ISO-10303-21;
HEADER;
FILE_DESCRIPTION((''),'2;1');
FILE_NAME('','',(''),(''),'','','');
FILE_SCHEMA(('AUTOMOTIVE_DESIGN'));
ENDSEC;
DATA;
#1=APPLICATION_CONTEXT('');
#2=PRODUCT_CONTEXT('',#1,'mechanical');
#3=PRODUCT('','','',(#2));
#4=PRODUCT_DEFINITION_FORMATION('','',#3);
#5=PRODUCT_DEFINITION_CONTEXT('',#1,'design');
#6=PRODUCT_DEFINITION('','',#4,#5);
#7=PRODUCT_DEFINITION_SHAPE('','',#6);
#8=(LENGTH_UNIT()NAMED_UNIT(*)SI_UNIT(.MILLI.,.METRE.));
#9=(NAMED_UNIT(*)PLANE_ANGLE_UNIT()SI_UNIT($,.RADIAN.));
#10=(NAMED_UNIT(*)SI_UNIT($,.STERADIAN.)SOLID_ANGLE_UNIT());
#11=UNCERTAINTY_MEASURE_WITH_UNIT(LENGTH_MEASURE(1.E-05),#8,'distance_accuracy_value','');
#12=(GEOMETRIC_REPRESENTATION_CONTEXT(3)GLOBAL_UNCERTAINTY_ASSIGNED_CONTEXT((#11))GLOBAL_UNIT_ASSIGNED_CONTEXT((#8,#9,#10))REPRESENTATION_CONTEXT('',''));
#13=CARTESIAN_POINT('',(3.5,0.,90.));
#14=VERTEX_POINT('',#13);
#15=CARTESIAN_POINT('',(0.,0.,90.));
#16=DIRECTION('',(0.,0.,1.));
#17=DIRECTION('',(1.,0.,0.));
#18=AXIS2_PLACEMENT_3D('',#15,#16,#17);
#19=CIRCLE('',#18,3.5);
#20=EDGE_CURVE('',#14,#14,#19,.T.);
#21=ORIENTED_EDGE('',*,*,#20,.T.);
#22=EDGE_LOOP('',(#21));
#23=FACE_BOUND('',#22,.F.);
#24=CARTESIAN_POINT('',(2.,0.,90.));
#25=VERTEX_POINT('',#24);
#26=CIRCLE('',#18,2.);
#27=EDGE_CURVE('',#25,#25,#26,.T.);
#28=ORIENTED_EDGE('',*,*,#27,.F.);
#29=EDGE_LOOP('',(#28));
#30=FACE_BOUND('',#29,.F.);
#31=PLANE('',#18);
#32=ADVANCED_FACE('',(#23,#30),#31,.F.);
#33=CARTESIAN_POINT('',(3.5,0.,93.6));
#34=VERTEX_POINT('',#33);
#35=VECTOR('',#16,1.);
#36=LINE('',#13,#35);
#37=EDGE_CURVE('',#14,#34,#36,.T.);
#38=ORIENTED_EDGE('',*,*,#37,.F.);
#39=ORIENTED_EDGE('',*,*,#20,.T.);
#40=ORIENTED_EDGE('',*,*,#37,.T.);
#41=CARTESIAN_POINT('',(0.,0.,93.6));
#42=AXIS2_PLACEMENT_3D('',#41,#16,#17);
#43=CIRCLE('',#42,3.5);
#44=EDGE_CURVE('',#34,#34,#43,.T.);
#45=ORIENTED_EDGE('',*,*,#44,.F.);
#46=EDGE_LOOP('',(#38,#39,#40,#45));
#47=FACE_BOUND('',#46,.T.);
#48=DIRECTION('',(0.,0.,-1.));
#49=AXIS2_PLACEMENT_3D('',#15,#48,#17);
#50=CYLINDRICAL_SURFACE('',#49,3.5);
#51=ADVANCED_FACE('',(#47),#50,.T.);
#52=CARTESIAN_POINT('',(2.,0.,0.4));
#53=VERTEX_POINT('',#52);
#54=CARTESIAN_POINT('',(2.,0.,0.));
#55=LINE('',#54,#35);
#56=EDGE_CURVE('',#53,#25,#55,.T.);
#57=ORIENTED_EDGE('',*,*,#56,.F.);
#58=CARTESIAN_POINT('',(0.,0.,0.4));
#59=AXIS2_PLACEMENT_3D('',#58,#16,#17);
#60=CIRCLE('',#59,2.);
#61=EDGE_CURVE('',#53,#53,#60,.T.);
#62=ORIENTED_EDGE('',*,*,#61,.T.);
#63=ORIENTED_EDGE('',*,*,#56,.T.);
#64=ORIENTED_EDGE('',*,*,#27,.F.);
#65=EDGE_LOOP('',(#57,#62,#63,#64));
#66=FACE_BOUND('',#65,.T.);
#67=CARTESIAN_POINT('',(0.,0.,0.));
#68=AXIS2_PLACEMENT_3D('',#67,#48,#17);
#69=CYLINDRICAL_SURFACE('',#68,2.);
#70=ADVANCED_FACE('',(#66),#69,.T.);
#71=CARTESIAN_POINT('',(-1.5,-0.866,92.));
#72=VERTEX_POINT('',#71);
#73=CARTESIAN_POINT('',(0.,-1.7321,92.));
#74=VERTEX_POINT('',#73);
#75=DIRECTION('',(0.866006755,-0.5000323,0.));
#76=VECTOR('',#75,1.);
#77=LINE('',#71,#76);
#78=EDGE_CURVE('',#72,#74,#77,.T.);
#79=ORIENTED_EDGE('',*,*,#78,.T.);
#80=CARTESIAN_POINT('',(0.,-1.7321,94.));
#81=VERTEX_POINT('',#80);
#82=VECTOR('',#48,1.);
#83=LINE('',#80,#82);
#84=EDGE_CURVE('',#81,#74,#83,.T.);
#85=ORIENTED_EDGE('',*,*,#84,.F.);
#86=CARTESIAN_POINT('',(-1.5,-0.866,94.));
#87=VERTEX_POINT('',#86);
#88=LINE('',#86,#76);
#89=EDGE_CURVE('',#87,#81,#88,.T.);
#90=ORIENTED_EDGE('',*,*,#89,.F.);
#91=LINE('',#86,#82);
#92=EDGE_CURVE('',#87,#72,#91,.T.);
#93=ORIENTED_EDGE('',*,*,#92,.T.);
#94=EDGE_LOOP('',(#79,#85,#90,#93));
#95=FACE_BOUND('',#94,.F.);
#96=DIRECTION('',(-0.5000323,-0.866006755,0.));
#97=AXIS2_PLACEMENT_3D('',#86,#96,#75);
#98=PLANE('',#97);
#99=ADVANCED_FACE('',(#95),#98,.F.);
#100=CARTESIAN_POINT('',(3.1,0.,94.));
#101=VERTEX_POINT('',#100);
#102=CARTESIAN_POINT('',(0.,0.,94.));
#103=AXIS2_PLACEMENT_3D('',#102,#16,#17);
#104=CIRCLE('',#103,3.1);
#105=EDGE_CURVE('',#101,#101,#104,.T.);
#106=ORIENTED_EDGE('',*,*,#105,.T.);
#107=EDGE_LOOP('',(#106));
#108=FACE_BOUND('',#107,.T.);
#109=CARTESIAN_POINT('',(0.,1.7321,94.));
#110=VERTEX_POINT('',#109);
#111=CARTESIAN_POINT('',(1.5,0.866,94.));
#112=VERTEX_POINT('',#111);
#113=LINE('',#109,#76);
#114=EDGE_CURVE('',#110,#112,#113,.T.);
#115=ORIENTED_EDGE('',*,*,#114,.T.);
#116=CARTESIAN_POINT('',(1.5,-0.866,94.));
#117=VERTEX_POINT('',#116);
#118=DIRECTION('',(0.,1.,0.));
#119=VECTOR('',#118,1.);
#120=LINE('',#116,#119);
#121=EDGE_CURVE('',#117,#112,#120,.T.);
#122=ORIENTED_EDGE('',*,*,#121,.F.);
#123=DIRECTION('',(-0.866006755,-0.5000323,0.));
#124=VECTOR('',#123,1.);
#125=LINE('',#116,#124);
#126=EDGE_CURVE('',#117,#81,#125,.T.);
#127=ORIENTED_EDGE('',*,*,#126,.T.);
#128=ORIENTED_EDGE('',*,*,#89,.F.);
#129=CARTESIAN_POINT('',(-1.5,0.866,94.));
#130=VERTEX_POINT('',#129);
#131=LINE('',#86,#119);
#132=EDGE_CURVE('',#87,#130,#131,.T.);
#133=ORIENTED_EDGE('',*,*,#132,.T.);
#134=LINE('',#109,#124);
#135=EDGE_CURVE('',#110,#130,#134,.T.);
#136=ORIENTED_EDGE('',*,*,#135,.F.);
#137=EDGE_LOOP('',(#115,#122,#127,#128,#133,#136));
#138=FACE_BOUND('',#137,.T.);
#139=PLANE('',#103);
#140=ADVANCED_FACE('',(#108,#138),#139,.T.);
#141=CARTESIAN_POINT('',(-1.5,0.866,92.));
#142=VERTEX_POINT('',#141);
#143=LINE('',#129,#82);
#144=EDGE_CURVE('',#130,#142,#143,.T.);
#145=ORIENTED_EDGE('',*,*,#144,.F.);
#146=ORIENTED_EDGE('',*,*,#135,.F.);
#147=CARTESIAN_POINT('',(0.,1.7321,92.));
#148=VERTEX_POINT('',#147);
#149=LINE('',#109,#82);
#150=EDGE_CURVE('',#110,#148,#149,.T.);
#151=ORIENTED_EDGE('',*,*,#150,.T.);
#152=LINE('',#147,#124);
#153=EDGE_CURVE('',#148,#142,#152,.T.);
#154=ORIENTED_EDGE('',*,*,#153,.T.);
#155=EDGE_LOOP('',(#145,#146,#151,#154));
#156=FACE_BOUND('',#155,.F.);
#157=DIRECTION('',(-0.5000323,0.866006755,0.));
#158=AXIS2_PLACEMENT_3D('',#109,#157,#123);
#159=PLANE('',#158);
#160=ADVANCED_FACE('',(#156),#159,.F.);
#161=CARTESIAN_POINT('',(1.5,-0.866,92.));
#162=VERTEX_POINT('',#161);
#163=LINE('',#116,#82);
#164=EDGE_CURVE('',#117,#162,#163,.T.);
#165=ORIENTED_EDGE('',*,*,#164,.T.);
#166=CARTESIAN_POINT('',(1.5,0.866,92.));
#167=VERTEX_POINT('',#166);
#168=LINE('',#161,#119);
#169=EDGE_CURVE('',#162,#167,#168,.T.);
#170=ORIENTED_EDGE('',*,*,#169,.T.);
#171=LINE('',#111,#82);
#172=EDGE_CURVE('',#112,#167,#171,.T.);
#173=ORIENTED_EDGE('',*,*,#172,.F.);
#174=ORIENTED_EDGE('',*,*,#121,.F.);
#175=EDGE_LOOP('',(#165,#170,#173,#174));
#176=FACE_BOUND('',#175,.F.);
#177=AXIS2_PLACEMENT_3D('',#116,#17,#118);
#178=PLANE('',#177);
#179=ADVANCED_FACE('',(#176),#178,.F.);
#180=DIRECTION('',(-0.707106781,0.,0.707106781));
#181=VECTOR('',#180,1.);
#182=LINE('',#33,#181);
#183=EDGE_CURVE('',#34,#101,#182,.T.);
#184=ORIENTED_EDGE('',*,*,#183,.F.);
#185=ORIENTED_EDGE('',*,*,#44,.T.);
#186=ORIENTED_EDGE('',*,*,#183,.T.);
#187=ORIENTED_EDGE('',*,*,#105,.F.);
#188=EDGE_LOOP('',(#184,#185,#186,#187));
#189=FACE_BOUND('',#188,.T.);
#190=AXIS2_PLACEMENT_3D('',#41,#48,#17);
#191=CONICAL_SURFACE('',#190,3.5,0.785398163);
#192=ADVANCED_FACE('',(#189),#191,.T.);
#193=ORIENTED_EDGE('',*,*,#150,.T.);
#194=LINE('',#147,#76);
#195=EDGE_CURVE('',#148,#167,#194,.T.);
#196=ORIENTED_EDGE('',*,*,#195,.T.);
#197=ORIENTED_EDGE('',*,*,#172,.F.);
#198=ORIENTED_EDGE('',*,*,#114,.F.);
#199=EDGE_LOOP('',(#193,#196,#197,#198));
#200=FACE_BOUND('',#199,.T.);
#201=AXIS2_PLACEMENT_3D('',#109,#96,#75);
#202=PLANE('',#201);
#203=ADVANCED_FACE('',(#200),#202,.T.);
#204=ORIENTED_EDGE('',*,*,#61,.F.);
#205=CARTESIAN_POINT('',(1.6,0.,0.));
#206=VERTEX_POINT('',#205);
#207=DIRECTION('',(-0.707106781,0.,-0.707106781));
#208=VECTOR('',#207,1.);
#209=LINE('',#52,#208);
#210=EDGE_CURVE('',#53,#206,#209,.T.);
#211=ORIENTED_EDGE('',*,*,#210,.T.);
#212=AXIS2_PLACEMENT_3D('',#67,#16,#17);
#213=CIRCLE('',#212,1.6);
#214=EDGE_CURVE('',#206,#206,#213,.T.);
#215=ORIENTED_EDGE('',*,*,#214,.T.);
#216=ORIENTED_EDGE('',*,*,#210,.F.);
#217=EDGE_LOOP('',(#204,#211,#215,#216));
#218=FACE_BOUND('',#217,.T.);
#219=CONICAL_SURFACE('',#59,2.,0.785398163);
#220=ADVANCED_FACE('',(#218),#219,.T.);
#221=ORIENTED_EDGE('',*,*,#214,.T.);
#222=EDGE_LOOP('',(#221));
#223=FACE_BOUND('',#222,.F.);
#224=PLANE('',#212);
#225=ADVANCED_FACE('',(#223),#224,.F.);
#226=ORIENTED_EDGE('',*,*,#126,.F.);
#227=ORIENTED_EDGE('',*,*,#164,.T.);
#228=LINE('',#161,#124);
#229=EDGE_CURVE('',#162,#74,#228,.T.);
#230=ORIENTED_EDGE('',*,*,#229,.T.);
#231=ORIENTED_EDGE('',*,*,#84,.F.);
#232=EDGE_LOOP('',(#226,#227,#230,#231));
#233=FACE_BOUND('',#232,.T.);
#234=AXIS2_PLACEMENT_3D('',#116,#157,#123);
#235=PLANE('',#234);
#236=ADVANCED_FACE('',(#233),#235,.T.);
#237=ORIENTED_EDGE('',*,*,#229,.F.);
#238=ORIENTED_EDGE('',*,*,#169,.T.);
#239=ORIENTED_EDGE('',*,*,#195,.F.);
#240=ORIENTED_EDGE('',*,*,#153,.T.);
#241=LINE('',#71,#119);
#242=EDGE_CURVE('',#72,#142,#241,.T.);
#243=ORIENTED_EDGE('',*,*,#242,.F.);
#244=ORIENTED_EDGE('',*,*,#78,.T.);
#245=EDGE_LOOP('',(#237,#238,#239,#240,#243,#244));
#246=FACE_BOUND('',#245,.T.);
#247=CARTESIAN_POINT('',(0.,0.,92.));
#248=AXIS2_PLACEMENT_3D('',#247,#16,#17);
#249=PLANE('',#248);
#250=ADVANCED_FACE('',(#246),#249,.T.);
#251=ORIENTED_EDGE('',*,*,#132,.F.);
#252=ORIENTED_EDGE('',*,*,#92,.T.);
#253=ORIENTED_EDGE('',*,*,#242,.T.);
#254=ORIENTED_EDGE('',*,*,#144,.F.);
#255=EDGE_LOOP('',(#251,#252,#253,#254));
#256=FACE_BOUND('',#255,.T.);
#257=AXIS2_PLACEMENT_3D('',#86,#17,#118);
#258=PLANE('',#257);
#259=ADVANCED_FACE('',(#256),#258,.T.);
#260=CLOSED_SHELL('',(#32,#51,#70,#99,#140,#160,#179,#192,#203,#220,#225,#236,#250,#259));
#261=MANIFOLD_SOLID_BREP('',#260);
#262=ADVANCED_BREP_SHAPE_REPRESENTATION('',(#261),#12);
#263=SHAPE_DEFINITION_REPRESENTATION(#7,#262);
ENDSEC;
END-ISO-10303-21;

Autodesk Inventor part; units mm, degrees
ref_plane "YZ Plane" through (0, 0, 0) normal (1, 0, 0) x (0, 1, 0)
ref_plane "XZ Plane" through (0, 0, 0) normal (0, 1, 0) x (-1, 0, 0)
ref_plane "XY Plane" through (0, 0, 0) normal (0, 0, 1) x (1, 0, 0)
sketch "Sketch1" plane through (0, 0, 0) normal (0, 0, 1) x (1, 0, 0)
  circle A0 centre (0, 0) radius 2
  dimension "Diameter" = 4
extrude "Extrusion1" add sketch "Sketch1" along normal blind 90
sketch "Sketch2" plane through (0, 0, 90) normal (0, 0, 1) x (1, 0, 0)
  circle A0 centre (0, 0) radius 2 projected
  circle A1 centre (0, 0) radius 3.5
  dimension "Head_Diameter" = 7
extrude "Extrusion2" add sketch "Sketch2" along normal blind 4 contours A0 | A1
sketch "Sketch3" plane through (0, 0, 94) normal (0, 0, 1) x (1, 0, 0)
  circle A0 centre (0, 0) radius 3.5 projected
  circle A1 centre (0, 0) radius 1.7321 construction
  line L0 (0, 1.7321) -> (1.5, 0.866)
  line L1 (1.5, -0.866) -> (1.5, 0.866)
  line L2 (0, 1.7321) -> (-1.5, 0.866)
  line L3 (-1.5, -0.866) -> (-1.5, 0.866)
  line L4 (-1.5, -0.866) -> (0, -1.7321)
  line L5 (1.5, -0.866) -> (0, -1.7321)
  dimension "Hex_Width" = 3
extrude "Extrusion3" cut sketch "Sketch3" against normal blind 2 contours L0 L1 L5 L4 L3 L2
thread "Thread1" size "M4x0.7" class "4g6g" standard "ANSI Metric M Profile" length 20
chamfer "Chamfer1" distance 0.4 angle 45 2 edges at (-3.5, 0, 94) (-2, 0, 0)
equation "\"d9\" = ThreadLength"
equation "\"d12\" = Chamfer"
equation "\"ThreadLength\" = 20"
equation "\"Chamfer\" = 0.4"
properties part number "SCREW, SOCKET HD, P, 12_9, M4X0_7X90" material "Steel, MS"
